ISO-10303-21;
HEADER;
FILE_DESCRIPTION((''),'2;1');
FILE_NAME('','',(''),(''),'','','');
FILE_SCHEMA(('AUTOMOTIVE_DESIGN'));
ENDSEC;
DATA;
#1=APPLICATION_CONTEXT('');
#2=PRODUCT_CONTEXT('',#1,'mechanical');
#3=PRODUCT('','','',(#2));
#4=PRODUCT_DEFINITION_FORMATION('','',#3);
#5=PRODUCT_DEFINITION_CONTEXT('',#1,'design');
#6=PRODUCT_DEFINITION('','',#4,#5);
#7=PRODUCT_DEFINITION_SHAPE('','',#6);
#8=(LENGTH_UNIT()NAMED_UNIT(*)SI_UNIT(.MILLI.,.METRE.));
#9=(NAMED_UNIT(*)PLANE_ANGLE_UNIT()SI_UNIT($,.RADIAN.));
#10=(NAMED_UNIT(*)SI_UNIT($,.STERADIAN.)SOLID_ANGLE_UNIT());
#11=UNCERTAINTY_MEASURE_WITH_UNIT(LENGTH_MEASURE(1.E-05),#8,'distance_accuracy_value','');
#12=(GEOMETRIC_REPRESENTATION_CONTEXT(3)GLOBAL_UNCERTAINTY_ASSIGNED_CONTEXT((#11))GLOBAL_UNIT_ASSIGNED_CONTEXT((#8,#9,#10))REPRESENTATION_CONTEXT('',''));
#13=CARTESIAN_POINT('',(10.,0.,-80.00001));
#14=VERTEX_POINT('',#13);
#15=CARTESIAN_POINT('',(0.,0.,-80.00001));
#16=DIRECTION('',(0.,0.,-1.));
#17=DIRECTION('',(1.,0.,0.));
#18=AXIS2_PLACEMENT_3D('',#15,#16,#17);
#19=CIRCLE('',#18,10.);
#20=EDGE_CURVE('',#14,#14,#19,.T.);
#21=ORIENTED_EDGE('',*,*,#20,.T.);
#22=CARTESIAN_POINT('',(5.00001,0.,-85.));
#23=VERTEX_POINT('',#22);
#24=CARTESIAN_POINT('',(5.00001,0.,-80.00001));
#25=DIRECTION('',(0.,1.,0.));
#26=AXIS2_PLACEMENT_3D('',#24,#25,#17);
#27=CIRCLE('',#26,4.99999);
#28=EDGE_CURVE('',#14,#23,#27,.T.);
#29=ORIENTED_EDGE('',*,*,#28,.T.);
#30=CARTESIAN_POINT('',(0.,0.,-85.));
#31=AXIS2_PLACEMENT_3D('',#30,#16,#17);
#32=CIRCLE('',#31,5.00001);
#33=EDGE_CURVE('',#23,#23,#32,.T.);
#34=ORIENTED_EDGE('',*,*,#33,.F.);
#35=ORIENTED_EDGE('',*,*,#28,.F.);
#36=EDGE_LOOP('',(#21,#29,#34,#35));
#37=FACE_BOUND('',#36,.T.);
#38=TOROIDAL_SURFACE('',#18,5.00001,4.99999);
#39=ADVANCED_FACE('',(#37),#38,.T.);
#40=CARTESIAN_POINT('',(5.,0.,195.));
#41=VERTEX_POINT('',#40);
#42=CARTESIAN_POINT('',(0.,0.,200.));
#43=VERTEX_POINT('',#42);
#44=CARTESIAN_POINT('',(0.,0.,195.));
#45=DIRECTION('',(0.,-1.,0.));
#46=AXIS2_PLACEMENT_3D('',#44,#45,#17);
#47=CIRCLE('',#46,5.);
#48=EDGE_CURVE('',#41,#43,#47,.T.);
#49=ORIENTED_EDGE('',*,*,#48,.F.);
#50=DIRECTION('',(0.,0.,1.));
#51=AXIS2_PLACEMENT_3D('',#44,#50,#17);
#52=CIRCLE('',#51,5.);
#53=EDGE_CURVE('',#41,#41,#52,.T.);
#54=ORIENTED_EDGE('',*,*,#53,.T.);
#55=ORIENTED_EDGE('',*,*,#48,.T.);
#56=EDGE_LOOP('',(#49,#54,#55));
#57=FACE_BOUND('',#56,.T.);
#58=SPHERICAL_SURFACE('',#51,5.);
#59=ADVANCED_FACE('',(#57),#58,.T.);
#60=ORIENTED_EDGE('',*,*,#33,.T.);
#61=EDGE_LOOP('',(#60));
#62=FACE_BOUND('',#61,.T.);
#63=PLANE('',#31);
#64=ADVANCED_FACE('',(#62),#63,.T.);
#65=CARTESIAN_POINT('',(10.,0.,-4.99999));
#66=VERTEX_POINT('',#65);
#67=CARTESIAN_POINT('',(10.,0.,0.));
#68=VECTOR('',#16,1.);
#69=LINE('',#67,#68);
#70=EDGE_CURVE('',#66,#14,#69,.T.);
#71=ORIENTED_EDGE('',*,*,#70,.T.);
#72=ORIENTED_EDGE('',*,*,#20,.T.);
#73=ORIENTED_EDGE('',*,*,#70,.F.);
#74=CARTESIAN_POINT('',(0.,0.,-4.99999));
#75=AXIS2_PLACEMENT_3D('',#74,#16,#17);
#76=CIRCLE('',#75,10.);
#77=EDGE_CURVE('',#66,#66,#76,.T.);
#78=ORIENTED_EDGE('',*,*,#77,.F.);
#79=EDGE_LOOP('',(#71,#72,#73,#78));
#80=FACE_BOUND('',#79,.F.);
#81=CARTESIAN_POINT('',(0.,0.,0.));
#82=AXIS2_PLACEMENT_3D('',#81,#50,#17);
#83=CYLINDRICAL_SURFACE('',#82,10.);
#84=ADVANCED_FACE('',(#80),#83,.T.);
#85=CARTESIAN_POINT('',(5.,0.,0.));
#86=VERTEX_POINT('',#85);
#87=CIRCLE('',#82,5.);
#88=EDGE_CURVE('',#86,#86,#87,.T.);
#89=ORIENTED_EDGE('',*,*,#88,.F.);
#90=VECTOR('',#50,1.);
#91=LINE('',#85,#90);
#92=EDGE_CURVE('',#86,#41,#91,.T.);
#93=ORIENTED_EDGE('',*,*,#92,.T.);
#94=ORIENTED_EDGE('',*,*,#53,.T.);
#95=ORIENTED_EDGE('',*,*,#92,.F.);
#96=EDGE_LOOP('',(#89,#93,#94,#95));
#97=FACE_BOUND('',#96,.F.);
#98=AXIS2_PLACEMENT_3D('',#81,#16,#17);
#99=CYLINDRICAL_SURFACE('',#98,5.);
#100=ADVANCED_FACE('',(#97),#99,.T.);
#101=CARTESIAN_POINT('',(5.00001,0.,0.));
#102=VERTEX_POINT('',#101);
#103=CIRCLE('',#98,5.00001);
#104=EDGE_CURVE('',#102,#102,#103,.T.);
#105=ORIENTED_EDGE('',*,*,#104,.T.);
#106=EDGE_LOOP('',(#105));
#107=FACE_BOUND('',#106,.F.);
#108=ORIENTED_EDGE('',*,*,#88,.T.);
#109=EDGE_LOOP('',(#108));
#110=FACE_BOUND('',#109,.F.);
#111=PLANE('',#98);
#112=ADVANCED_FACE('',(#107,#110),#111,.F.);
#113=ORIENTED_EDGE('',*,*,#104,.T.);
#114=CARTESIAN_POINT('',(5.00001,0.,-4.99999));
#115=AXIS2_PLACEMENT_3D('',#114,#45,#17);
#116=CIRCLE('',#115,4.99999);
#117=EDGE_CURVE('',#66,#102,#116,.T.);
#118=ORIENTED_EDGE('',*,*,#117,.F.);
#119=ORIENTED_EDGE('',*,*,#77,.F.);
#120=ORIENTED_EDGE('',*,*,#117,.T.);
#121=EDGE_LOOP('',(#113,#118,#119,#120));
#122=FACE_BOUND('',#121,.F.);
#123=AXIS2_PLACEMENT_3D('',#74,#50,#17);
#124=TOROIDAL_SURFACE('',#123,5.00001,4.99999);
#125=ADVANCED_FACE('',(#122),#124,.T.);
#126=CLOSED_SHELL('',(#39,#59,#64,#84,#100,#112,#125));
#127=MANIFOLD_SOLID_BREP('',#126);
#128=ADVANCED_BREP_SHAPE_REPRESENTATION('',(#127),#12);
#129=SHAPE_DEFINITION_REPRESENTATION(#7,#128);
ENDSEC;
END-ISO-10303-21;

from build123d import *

# Parameters (mm, degrees)
F0_R     = 5
F1_DEPTH = 200
F2_R     = 10
F2_R_2   = 5
F3_DEPTH = 85
F4_R     = 4.99999
F5_R     = 5


# Not quite as in the source:
# - a fillet or chamfer is up to 0.001 mm smaller than in the source, because OpenCascade refuses the exact size


with BuildPart() as f1:
    # F0 (on Top) → F1 (new body)
    with BuildSketch(Plane.XY):
        Circle(F0_R)
    extrude(amount=F1_DEPTH)

    # F2 (on face) → F3 (join)
    with BuildSketch(Plane(origin=(0, 0, 0), x_dir=(1, 0, 0), z_dir=(0, 0, -1))):
        Circle(F2_R)
        Circle(F2_R_2, mode=Mode.SUBTRACT)
        Circle(F2_R_2)
    extrude(amount=F3_DEPTH)

    # F4 (radius 5 in the source; OpenCascade refuses exactly that, so slightly less here)
    f4_edges = [f1.edges().sort_by_distance(p)[0] for p in [
        (-10, 0, 0),
        (-10, 0, -85),
    ]]
    fillet(f4_edges, radius=F4_R)

    # F5
    f5_edges = [f1.edges().sort_by_distance(p)[0] for p in [
        (-5, 0, 200),
    ]]
    fillet(f5_edges, radius=F5_R)


solid = f1.part
